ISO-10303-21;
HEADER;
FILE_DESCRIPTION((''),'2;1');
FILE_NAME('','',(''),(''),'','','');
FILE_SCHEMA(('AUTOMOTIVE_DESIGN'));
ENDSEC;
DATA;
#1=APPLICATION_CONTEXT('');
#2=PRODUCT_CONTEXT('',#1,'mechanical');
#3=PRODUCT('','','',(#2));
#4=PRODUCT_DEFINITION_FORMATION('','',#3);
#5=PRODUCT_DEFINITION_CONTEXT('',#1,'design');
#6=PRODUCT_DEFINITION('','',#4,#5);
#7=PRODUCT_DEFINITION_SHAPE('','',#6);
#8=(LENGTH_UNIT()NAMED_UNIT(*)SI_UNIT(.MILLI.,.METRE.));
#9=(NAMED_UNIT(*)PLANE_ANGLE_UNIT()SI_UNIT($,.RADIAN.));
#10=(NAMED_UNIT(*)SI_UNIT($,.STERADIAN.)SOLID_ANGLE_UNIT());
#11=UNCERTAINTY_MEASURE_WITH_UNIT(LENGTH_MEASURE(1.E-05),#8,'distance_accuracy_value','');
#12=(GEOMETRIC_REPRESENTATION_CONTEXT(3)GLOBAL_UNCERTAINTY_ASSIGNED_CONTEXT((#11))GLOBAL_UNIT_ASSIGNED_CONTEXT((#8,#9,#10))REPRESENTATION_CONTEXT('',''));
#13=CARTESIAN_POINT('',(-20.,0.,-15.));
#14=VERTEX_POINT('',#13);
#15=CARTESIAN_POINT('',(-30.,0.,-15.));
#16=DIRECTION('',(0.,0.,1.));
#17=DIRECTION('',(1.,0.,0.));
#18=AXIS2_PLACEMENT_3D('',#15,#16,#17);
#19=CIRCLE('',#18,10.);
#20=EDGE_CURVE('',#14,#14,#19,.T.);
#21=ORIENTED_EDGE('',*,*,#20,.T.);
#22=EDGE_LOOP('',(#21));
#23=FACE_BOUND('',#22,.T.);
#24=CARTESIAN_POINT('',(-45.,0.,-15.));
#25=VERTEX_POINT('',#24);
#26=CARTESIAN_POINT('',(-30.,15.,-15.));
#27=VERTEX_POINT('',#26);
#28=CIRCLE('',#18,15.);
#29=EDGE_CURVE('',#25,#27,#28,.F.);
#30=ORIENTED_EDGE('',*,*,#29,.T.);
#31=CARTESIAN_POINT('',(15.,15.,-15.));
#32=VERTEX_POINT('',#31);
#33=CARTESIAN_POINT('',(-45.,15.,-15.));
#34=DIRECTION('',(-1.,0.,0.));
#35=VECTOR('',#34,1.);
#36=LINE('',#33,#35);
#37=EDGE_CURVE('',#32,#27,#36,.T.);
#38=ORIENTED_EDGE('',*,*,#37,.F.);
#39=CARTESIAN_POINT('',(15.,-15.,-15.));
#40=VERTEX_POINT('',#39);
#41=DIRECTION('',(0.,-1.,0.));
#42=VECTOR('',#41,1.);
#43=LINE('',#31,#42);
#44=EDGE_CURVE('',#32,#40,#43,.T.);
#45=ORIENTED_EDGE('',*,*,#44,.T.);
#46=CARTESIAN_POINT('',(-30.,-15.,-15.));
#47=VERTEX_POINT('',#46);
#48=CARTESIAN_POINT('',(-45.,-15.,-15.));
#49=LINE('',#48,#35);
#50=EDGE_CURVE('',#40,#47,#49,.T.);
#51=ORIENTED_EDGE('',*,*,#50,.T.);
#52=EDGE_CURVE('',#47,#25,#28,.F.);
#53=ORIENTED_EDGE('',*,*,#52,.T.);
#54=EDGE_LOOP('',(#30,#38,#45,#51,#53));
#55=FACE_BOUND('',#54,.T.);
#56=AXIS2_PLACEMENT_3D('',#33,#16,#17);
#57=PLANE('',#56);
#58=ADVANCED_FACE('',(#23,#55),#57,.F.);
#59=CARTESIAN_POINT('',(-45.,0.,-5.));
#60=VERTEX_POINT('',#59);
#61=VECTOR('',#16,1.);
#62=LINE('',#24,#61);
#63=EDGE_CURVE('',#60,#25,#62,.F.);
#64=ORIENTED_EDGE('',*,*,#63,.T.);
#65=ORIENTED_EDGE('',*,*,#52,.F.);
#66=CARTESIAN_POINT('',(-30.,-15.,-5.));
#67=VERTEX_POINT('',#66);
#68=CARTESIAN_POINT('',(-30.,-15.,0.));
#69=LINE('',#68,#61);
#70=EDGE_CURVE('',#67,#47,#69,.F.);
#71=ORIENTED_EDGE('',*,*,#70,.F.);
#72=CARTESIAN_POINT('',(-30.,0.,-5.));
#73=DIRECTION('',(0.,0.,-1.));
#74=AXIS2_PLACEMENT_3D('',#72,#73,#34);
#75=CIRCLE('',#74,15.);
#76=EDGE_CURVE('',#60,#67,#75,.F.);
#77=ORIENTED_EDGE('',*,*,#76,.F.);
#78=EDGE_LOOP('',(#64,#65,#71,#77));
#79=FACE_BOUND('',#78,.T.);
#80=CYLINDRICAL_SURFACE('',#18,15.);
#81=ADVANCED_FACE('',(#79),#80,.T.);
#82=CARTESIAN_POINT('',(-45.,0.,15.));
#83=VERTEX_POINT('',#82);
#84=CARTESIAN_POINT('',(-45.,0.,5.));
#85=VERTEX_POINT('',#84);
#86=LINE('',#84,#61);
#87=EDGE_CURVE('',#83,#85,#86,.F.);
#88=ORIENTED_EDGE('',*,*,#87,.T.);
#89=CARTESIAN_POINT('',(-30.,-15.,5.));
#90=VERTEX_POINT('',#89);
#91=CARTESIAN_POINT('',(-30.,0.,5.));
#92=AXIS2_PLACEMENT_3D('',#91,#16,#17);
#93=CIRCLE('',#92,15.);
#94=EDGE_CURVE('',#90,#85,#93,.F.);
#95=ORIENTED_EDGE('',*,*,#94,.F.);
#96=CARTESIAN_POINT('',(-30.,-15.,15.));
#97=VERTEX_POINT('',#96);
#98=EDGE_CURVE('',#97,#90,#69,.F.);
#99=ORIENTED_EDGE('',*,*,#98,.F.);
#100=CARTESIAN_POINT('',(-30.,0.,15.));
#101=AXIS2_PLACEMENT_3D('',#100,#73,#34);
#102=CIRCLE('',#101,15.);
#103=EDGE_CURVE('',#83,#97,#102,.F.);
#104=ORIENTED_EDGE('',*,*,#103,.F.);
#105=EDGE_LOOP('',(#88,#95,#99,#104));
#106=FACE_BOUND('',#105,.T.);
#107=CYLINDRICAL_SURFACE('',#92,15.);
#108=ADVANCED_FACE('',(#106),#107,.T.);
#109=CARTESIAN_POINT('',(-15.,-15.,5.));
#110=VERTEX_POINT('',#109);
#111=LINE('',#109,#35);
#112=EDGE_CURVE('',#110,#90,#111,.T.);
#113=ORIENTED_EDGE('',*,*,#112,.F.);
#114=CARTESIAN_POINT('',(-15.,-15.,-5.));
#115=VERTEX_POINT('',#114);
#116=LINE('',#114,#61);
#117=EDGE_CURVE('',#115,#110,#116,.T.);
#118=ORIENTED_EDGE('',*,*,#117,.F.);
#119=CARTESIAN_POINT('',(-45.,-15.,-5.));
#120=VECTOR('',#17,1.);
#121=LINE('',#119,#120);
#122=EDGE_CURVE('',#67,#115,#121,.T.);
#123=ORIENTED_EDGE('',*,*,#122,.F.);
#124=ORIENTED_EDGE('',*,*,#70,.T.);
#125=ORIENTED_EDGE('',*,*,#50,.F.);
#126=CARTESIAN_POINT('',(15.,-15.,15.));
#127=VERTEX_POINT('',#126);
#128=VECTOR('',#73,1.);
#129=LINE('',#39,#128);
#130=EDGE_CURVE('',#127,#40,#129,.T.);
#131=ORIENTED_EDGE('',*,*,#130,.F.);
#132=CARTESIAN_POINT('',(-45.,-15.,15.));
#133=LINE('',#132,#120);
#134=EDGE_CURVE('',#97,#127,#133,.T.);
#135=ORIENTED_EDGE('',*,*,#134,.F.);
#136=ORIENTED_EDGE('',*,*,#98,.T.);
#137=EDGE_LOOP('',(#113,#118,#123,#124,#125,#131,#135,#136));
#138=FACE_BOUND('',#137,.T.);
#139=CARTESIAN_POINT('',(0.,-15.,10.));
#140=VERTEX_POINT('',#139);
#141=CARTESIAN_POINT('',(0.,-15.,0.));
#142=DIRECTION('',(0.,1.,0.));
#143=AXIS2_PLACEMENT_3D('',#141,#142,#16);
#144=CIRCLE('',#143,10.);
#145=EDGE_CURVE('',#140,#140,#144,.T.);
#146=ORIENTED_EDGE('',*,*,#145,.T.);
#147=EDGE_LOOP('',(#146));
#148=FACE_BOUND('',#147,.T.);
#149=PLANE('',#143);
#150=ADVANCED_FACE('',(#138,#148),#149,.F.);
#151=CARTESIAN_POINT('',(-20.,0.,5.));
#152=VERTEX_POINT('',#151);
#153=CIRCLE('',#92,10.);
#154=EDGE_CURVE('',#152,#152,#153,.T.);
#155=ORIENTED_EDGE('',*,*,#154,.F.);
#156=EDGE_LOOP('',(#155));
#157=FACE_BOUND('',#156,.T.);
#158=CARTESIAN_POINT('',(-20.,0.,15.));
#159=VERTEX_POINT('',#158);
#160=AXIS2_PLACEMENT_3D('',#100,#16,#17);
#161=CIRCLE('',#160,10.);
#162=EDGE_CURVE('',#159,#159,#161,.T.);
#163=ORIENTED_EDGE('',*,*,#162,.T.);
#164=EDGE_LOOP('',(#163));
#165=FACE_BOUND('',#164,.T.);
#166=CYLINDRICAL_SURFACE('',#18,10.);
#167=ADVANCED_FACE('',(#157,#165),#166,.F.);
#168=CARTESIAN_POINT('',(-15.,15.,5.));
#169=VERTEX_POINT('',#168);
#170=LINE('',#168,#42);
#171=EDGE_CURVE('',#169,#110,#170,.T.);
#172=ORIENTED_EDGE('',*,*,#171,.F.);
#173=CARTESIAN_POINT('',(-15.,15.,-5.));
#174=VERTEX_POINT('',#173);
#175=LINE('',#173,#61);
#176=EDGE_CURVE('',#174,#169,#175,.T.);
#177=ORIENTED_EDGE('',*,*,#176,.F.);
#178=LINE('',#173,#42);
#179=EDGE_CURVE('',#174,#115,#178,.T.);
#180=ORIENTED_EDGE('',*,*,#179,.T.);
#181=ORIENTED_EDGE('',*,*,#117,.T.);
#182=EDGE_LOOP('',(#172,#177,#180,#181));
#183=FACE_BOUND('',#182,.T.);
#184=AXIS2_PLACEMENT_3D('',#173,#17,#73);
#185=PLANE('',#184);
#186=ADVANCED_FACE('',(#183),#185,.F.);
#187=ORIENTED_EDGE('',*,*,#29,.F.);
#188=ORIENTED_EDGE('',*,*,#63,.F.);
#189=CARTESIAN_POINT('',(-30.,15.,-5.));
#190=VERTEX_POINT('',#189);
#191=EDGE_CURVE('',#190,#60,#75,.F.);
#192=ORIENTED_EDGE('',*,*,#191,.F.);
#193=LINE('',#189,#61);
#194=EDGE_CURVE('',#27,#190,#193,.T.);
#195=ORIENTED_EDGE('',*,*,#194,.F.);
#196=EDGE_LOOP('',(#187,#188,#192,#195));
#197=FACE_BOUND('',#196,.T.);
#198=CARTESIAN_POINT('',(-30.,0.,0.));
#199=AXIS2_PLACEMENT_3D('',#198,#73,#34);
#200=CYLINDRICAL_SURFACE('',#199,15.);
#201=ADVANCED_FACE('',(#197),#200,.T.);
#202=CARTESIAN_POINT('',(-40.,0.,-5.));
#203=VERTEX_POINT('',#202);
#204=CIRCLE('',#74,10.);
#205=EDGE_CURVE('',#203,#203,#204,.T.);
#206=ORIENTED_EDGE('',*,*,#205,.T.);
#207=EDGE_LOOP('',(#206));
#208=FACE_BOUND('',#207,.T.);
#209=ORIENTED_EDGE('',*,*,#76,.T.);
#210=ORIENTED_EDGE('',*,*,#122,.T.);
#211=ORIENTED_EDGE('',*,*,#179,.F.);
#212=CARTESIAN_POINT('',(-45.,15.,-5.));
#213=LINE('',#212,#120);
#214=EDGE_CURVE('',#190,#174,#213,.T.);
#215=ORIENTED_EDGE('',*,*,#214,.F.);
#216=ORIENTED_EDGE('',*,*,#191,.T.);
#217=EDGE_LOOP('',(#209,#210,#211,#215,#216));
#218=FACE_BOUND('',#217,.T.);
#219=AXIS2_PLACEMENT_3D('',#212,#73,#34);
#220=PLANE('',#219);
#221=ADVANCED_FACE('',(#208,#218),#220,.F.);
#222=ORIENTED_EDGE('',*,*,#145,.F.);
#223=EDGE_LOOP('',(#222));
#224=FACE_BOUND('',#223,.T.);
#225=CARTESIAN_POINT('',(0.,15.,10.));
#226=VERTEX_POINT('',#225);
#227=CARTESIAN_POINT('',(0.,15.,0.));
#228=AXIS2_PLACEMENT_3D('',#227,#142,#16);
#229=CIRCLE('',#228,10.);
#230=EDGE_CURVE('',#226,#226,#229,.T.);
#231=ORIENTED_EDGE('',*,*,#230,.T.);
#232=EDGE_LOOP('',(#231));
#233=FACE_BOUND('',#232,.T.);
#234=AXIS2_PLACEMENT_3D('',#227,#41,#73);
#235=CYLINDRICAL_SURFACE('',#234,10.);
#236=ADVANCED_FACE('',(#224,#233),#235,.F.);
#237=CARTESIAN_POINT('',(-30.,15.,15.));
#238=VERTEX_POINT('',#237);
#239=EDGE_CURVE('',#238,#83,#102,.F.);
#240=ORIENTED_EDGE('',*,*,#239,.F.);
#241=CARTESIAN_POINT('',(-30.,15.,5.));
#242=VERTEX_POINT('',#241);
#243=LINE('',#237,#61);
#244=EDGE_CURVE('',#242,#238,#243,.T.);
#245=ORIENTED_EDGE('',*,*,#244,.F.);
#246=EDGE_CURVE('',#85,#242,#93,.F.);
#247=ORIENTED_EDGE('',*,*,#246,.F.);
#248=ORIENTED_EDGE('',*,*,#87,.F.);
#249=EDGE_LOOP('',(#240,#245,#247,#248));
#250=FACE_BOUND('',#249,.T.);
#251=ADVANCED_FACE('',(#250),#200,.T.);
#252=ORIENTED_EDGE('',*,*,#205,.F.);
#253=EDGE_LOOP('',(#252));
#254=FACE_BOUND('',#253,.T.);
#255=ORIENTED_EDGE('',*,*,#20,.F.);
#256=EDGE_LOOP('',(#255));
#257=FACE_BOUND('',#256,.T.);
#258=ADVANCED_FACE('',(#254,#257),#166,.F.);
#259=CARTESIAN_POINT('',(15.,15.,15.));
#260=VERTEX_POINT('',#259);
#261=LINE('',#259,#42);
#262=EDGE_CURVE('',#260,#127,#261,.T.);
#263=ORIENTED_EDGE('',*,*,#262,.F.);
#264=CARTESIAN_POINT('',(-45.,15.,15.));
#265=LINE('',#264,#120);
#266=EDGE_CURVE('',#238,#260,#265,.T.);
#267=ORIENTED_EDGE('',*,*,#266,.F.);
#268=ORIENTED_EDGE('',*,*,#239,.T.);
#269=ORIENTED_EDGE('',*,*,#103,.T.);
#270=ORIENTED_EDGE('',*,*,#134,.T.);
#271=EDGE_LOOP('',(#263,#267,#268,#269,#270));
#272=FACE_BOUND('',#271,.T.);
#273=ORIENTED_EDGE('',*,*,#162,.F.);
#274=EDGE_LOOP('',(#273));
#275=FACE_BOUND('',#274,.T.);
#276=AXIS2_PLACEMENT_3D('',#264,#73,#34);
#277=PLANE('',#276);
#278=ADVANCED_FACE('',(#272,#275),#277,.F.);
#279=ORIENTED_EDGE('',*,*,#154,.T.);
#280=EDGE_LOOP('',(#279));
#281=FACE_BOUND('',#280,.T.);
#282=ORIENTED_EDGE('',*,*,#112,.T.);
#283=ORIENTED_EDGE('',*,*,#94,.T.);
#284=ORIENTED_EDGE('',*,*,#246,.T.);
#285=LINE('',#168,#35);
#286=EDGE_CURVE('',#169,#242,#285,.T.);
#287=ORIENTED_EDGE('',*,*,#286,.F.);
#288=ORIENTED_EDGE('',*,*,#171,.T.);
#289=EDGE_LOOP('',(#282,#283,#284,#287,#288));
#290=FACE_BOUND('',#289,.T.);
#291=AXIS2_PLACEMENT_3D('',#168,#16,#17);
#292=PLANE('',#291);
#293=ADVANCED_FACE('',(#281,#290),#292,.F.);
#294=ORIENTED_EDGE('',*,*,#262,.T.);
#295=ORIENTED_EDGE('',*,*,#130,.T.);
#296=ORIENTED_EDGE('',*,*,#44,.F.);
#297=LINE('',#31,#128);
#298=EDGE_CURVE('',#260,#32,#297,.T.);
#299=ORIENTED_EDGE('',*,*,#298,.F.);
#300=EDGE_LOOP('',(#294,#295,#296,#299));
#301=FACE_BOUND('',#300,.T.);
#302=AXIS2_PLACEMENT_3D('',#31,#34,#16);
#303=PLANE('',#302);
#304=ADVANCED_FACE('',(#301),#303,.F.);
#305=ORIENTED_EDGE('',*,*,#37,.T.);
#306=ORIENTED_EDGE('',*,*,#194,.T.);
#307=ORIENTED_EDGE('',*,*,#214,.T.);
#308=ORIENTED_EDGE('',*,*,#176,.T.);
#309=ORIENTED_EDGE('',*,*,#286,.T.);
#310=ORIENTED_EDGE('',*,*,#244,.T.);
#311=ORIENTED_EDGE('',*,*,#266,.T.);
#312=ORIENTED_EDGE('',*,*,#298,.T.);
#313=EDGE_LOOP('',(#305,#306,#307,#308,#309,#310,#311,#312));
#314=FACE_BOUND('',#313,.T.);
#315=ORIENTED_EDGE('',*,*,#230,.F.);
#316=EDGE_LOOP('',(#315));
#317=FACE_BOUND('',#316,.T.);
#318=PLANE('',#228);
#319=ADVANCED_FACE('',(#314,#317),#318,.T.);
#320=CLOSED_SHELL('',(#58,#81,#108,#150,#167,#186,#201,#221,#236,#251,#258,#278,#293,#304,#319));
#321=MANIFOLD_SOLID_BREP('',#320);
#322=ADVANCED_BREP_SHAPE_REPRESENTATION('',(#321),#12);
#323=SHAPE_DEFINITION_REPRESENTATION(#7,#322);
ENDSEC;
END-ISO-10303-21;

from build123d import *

# Parameters (mm, degrees)
SKETCH1_R           = 10
BOSS_EXTRUDE1_DEPTH = 15
SKETCH2_R           = 10
CUT_EXTRUDE1_DEPTH  = 57.124860802
FILLET1_R           = 15


with BuildPart() as part:
    # Sketch1 → Boss-Extrude1 (new, symmetric)
    with BuildSketch(Plane(origin=(0, 0, 0), x_dir=(1, 0, 0), z_dir=(0, 1, 0))):
        Polygon((-45, 15), (15, 15), (15, -15), (-45, -15), (-45, -5), (-15, -5), (-15, 5), (-45, 5), align=None)
        with Locations(Location((0, 0, 0), (0, 0, 270))):
            Circle(SKETCH1_R, mode=Mode.SUBTRACT)
    extrude(amount=BOSS_EXTRUDE1_DEPTH, both=True)

    # Sketch2 → Cut-Extrude1 (cut, through all)
    with BuildSketch(Plane.XY.offset(15)):
        with Locations((-30, 0)):
            Circle(SKETCH2_R)
    extrude(amount=-CUT_EXTRUDE1_DEPTH, mode=Mode.SUBTRACT)

    # Fillet1
    fillet1_edges = [part.edges().sort_by_distance(p)[0] for p in [
        (-45, -15, -10),
        (-45, 15, -10),
        (-45, -15, 10),
        (-45, 15, 10),
    ]]
    fillet(fillet1_edges, radius=FILLET1_R - 0.0001)  # a hair under: the kernel refuses the full size


solid = part.part
